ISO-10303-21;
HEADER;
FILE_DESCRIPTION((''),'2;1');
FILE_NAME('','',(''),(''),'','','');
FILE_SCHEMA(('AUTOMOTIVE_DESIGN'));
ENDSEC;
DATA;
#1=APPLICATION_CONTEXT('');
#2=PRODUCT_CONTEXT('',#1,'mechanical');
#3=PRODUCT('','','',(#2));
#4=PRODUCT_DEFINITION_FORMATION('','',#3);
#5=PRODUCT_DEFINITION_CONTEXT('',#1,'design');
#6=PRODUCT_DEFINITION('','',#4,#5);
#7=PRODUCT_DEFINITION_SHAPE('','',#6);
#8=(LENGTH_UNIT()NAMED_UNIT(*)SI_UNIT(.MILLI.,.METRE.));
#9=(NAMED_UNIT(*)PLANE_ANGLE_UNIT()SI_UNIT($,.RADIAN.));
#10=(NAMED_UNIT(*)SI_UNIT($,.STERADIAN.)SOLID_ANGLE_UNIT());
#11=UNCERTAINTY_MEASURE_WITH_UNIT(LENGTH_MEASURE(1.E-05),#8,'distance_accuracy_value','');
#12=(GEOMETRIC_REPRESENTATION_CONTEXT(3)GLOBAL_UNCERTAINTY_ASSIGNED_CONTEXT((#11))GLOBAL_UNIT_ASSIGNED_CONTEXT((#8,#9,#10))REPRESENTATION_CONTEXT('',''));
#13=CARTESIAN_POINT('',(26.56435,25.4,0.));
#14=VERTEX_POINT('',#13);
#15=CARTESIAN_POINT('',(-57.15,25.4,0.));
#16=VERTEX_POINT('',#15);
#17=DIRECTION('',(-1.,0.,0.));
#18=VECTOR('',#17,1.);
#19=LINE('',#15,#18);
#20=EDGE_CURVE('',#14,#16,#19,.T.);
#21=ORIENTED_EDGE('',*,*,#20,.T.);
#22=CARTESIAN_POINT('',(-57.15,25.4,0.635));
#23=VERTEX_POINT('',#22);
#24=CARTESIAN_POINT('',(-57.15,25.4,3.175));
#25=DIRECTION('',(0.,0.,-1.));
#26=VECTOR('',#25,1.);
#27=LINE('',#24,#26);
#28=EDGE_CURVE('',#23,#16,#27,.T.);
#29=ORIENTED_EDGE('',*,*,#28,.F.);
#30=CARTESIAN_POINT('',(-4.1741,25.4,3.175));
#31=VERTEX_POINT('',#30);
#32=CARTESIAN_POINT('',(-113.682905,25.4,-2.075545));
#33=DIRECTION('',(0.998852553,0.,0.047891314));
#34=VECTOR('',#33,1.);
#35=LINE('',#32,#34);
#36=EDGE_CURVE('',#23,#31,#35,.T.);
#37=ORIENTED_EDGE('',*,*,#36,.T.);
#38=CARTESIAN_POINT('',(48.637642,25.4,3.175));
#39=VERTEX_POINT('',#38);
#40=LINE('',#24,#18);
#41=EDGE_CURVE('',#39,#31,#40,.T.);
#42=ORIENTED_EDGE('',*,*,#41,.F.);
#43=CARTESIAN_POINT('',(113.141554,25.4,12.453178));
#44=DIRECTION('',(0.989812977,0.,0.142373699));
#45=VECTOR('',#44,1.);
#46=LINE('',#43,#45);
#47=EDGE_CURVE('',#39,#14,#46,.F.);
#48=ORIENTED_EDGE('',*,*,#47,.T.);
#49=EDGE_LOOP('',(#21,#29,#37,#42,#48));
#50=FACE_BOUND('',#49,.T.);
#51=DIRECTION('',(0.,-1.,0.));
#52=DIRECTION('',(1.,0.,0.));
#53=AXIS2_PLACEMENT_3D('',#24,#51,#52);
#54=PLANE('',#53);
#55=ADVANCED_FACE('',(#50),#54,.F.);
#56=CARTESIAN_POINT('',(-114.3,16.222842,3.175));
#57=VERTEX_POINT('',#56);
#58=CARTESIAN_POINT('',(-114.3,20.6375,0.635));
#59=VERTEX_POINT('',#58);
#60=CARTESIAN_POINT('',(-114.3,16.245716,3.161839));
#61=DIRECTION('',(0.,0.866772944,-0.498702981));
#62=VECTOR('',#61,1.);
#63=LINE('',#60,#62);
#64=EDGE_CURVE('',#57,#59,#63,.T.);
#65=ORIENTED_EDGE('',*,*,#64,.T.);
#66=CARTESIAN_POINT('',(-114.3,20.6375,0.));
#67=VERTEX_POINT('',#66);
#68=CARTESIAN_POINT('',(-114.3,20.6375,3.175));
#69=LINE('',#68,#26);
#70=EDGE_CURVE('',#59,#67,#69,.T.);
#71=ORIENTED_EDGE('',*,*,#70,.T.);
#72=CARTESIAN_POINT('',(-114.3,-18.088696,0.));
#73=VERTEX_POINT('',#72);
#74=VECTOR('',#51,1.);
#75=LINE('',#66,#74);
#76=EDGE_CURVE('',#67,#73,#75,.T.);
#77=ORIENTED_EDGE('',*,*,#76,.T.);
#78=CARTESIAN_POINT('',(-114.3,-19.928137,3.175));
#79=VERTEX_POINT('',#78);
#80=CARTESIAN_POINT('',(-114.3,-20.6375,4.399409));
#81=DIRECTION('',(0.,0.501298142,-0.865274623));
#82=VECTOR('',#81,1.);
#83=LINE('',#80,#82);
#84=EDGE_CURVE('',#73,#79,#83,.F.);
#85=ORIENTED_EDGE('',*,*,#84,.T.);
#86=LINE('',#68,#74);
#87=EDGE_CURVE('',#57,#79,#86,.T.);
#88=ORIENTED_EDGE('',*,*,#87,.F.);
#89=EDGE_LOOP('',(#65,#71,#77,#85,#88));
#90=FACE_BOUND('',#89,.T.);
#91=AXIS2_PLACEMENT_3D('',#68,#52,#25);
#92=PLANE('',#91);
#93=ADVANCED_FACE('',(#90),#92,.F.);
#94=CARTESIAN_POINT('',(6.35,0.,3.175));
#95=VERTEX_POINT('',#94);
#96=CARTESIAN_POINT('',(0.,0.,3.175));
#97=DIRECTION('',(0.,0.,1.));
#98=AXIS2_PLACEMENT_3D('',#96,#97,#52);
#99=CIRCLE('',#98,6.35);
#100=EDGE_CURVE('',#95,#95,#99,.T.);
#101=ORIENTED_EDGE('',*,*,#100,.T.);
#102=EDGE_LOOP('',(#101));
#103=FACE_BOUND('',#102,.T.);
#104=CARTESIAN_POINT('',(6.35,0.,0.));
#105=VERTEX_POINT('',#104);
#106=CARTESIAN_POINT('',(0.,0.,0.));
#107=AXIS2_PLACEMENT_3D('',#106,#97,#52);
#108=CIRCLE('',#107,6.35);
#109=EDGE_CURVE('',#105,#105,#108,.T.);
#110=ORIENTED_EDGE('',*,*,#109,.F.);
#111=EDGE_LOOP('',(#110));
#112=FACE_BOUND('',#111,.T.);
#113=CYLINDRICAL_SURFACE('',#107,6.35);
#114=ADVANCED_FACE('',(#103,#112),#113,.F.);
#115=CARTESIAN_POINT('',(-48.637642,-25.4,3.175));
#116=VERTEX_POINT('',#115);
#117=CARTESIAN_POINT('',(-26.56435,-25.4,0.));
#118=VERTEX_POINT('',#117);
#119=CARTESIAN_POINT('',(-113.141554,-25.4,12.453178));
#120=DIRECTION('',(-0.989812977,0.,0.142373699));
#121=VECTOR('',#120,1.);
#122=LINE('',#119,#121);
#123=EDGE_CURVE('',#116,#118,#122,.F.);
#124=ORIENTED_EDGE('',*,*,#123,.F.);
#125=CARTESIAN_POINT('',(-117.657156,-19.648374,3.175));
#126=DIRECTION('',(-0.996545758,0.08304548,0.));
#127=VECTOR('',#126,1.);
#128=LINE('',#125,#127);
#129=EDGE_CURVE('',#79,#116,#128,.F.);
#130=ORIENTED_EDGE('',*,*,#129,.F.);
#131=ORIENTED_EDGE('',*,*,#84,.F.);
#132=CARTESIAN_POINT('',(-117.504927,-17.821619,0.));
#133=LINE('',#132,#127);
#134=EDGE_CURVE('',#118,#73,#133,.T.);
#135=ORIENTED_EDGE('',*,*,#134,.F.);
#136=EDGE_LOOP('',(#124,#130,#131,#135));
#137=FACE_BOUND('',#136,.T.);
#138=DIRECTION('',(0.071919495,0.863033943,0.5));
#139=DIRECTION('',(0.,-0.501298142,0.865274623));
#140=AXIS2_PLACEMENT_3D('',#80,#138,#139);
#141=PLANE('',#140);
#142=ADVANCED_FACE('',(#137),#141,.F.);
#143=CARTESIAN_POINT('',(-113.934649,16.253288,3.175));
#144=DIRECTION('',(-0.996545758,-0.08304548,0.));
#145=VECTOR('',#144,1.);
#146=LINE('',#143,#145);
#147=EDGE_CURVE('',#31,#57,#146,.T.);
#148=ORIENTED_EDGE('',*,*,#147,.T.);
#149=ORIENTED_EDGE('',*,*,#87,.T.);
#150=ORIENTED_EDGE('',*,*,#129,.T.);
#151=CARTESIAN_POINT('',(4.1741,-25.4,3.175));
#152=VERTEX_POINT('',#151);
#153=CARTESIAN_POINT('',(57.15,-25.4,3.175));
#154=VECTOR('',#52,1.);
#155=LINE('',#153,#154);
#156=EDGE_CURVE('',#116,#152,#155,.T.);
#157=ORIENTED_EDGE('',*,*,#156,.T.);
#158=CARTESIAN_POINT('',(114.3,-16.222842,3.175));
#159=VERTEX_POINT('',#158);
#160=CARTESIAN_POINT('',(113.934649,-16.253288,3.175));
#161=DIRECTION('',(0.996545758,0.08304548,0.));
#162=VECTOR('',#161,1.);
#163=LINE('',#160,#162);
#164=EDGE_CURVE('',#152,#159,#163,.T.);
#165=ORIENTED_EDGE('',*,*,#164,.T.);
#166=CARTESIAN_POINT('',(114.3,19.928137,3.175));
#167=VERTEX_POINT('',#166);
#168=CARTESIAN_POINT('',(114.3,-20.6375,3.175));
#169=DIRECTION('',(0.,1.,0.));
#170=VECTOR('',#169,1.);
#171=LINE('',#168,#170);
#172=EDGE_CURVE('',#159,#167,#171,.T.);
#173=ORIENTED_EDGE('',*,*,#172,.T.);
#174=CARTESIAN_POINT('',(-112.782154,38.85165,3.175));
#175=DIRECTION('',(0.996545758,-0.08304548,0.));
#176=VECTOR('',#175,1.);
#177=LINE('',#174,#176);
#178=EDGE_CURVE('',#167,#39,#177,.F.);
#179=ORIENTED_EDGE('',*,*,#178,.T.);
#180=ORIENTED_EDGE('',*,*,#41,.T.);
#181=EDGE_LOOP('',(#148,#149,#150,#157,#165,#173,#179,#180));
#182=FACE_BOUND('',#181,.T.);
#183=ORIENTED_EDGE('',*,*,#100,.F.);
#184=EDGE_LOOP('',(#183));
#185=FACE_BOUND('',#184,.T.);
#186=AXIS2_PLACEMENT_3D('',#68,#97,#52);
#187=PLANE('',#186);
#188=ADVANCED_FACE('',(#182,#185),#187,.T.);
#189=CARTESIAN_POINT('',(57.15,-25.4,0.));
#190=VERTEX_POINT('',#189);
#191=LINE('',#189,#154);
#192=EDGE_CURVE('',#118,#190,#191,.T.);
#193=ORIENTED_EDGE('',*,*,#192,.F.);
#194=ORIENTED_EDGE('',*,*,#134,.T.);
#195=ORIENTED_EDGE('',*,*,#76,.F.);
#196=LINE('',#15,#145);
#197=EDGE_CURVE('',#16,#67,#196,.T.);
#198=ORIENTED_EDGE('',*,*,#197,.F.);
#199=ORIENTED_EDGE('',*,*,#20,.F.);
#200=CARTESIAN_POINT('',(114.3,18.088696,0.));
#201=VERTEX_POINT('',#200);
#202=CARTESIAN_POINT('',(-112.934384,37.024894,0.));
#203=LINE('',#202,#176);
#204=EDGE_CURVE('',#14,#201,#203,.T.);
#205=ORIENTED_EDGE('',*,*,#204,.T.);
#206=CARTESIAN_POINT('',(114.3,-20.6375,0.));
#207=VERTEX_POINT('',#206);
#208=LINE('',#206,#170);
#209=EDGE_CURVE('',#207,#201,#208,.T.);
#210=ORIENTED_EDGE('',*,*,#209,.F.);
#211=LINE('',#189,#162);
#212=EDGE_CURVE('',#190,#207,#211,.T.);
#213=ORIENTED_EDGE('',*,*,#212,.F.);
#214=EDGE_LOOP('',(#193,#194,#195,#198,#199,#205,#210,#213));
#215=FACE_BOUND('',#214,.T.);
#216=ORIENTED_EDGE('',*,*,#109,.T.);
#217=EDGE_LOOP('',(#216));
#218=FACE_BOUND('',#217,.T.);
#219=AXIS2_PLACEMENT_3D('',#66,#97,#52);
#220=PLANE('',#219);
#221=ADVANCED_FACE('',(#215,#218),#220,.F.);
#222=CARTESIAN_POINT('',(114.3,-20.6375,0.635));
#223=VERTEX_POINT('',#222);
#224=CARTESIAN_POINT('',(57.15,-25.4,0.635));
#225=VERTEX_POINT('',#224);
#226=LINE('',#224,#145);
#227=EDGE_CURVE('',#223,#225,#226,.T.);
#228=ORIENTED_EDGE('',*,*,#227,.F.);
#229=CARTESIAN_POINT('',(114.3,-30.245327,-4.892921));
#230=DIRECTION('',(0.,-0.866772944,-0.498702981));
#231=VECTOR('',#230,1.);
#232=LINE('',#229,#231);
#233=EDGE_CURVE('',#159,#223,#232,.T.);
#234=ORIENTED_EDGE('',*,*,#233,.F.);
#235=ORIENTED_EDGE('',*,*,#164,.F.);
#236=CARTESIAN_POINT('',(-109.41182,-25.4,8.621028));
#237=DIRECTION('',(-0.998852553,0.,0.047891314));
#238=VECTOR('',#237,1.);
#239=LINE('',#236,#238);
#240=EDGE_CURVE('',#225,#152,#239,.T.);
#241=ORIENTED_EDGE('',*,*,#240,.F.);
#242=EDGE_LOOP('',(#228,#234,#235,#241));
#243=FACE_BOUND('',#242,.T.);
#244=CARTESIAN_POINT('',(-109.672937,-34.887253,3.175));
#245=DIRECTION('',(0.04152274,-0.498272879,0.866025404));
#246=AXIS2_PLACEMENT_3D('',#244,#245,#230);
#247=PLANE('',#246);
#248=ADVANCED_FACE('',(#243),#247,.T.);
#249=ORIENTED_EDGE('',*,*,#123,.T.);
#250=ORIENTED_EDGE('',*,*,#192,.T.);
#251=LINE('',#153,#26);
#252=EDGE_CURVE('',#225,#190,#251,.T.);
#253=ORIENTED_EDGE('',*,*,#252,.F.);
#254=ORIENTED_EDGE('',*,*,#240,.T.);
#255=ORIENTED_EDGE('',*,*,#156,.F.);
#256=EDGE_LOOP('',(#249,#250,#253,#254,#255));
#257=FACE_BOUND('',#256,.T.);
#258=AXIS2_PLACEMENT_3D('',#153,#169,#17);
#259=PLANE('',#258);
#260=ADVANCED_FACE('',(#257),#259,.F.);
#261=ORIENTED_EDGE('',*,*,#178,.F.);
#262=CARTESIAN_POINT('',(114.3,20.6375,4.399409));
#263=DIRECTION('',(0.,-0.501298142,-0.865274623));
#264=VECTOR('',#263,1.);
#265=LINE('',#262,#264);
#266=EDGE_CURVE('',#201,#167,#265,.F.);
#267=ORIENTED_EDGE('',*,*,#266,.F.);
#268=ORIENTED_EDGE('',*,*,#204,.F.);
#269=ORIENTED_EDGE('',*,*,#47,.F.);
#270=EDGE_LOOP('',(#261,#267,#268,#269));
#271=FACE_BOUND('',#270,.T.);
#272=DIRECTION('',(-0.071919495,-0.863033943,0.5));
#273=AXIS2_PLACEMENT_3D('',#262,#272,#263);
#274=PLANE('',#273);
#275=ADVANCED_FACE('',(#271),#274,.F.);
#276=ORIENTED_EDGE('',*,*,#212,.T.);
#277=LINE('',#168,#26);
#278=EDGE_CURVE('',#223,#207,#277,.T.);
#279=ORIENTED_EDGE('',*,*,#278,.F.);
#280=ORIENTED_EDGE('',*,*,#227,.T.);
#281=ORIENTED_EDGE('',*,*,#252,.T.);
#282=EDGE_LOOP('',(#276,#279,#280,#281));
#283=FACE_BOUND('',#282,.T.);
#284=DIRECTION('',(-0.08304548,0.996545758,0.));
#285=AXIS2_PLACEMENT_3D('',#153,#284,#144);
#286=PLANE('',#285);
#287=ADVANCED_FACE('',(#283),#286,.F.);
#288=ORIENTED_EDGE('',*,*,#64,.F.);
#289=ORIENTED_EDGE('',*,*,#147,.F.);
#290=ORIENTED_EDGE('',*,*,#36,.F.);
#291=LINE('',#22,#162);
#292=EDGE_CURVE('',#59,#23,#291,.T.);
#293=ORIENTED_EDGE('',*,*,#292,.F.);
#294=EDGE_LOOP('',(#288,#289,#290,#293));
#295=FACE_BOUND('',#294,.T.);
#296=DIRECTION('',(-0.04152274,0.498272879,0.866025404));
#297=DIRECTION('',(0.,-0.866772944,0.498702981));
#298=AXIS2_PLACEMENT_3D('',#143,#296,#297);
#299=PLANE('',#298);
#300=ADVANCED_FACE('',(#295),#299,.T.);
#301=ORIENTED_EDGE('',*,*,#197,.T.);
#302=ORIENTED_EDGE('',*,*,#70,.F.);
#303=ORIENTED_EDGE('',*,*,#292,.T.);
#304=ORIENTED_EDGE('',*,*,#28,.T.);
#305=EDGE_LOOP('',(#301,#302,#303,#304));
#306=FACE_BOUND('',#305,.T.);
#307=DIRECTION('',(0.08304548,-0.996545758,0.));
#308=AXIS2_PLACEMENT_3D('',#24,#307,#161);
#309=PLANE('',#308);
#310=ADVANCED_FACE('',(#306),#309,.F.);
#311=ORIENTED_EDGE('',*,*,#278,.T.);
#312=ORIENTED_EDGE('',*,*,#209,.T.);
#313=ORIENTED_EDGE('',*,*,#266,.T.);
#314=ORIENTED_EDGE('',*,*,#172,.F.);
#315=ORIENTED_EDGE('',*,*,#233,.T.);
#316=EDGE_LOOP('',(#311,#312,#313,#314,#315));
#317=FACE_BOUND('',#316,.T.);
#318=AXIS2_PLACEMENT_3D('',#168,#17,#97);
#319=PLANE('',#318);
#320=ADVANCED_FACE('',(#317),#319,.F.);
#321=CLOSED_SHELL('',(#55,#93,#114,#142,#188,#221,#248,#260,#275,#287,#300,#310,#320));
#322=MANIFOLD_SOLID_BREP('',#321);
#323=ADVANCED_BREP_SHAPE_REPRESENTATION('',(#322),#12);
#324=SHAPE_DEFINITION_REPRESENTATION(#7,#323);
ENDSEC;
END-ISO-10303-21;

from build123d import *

# Parameters (mm, degrees)
BOSS_EXTRUDE1_DEPTH = 3.175
SKETCH2_R           = 6.35
CUT_EXTRUDE1_DEPTH  = 118.131253835
CHAMFER1_SIZE       = 4.399409051
CHAMFER1_SIZE_2     = 2.54


with BuildPart() as part:
    # Sketch1 → Boss-Extrude1 (new body)
    with BuildSketch(Plane.XY):
        Polygon((-57.15, 25.4), (57.15, 25.4), (114.3, 20.6375), (114.3, -20.6375), (57.15, -25.4), (-57.15, -25.4), (-114.3, -20.6375), (-114.3, 20.6375), align=None)
    extrude(amount=BOSS_EXTRUDE1_DEPTH)

    # Sketch2 → Cut-Extrude1 (cut, through all)
    with BuildSketch(Plane.XY.offset(3.175)):
        Circle(SKETCH2_R)
    extrude(amount=-CUT_EXTRUDE1_DEPTH, mode=Mode.SUBTRACT)

    # Chamfer1
    # the kernel refuses this chamfer: 4.399409051, 2.54 mm, written as the material it takes off along each edge
    with BuildSketch(Plane(origin=(23.12299944, 28.23558338, 0), x_dir=(0, 0, 1), z_dir=(0.9965457582448797, -0.0830454798537405, 0))) as chamfer1_piece_1:
        Polygon((CHAMFER1_SIZE, 0), (0, CHAMFER1_SIZE_2), (0, 0), align=None)
    extrude(amount=102.874688123, mode=Mode.SUBTRACT)
    with BuildSketch(Plane(origin=(-23.12299944, -28.23558338, 0), x_dir=(0.0830454798537407, 0.9965457582448796, 0), z_dir=(-0.9965457582448797, 0.08304547985374071, 0))) as chamfer1_piece_2:
        Polygon((CHAMFER1_SIZE_2, 0), (0, -CHAMFER1_SIZE), (0, 0), align=None)
    extrude(amount=102.874688123, mode=Mode.SUBTRACT)
    with BuildSketch(Plane(origin=(-125.64233352, 19.69230554, 3.175), x_dir=(0, 0, -1), z_dir=(0.9965457582448797, 0.08304547985374024, 0))) as chamfer1_piece_3:
        Polygon((CHAMFER1_SIZE_2, 0), (0, -CHAMFER1_SIZE), (0, 0), align=None)
    extrude(amount=125.637985093, mode=Mode.SUBTRACT)
    with BuildSketch(Plane(origin=(125.64233352, -19.69230554, 3.175), x_dir=(-0.08304547985374047, 0.9965457582448795, 0), z_dir=(-0.9965457582448797, -0.0830454798537405, 0))) as chamfer1_piece_4:
        Polygon((CHAMFER1_SIZE, 0), (0, CHAMFER1_SIZE_2), (0, 0), align=None)
    extrude(amount=125.637985093, mode=Mode.SUBTRACT)


solid = part.part
